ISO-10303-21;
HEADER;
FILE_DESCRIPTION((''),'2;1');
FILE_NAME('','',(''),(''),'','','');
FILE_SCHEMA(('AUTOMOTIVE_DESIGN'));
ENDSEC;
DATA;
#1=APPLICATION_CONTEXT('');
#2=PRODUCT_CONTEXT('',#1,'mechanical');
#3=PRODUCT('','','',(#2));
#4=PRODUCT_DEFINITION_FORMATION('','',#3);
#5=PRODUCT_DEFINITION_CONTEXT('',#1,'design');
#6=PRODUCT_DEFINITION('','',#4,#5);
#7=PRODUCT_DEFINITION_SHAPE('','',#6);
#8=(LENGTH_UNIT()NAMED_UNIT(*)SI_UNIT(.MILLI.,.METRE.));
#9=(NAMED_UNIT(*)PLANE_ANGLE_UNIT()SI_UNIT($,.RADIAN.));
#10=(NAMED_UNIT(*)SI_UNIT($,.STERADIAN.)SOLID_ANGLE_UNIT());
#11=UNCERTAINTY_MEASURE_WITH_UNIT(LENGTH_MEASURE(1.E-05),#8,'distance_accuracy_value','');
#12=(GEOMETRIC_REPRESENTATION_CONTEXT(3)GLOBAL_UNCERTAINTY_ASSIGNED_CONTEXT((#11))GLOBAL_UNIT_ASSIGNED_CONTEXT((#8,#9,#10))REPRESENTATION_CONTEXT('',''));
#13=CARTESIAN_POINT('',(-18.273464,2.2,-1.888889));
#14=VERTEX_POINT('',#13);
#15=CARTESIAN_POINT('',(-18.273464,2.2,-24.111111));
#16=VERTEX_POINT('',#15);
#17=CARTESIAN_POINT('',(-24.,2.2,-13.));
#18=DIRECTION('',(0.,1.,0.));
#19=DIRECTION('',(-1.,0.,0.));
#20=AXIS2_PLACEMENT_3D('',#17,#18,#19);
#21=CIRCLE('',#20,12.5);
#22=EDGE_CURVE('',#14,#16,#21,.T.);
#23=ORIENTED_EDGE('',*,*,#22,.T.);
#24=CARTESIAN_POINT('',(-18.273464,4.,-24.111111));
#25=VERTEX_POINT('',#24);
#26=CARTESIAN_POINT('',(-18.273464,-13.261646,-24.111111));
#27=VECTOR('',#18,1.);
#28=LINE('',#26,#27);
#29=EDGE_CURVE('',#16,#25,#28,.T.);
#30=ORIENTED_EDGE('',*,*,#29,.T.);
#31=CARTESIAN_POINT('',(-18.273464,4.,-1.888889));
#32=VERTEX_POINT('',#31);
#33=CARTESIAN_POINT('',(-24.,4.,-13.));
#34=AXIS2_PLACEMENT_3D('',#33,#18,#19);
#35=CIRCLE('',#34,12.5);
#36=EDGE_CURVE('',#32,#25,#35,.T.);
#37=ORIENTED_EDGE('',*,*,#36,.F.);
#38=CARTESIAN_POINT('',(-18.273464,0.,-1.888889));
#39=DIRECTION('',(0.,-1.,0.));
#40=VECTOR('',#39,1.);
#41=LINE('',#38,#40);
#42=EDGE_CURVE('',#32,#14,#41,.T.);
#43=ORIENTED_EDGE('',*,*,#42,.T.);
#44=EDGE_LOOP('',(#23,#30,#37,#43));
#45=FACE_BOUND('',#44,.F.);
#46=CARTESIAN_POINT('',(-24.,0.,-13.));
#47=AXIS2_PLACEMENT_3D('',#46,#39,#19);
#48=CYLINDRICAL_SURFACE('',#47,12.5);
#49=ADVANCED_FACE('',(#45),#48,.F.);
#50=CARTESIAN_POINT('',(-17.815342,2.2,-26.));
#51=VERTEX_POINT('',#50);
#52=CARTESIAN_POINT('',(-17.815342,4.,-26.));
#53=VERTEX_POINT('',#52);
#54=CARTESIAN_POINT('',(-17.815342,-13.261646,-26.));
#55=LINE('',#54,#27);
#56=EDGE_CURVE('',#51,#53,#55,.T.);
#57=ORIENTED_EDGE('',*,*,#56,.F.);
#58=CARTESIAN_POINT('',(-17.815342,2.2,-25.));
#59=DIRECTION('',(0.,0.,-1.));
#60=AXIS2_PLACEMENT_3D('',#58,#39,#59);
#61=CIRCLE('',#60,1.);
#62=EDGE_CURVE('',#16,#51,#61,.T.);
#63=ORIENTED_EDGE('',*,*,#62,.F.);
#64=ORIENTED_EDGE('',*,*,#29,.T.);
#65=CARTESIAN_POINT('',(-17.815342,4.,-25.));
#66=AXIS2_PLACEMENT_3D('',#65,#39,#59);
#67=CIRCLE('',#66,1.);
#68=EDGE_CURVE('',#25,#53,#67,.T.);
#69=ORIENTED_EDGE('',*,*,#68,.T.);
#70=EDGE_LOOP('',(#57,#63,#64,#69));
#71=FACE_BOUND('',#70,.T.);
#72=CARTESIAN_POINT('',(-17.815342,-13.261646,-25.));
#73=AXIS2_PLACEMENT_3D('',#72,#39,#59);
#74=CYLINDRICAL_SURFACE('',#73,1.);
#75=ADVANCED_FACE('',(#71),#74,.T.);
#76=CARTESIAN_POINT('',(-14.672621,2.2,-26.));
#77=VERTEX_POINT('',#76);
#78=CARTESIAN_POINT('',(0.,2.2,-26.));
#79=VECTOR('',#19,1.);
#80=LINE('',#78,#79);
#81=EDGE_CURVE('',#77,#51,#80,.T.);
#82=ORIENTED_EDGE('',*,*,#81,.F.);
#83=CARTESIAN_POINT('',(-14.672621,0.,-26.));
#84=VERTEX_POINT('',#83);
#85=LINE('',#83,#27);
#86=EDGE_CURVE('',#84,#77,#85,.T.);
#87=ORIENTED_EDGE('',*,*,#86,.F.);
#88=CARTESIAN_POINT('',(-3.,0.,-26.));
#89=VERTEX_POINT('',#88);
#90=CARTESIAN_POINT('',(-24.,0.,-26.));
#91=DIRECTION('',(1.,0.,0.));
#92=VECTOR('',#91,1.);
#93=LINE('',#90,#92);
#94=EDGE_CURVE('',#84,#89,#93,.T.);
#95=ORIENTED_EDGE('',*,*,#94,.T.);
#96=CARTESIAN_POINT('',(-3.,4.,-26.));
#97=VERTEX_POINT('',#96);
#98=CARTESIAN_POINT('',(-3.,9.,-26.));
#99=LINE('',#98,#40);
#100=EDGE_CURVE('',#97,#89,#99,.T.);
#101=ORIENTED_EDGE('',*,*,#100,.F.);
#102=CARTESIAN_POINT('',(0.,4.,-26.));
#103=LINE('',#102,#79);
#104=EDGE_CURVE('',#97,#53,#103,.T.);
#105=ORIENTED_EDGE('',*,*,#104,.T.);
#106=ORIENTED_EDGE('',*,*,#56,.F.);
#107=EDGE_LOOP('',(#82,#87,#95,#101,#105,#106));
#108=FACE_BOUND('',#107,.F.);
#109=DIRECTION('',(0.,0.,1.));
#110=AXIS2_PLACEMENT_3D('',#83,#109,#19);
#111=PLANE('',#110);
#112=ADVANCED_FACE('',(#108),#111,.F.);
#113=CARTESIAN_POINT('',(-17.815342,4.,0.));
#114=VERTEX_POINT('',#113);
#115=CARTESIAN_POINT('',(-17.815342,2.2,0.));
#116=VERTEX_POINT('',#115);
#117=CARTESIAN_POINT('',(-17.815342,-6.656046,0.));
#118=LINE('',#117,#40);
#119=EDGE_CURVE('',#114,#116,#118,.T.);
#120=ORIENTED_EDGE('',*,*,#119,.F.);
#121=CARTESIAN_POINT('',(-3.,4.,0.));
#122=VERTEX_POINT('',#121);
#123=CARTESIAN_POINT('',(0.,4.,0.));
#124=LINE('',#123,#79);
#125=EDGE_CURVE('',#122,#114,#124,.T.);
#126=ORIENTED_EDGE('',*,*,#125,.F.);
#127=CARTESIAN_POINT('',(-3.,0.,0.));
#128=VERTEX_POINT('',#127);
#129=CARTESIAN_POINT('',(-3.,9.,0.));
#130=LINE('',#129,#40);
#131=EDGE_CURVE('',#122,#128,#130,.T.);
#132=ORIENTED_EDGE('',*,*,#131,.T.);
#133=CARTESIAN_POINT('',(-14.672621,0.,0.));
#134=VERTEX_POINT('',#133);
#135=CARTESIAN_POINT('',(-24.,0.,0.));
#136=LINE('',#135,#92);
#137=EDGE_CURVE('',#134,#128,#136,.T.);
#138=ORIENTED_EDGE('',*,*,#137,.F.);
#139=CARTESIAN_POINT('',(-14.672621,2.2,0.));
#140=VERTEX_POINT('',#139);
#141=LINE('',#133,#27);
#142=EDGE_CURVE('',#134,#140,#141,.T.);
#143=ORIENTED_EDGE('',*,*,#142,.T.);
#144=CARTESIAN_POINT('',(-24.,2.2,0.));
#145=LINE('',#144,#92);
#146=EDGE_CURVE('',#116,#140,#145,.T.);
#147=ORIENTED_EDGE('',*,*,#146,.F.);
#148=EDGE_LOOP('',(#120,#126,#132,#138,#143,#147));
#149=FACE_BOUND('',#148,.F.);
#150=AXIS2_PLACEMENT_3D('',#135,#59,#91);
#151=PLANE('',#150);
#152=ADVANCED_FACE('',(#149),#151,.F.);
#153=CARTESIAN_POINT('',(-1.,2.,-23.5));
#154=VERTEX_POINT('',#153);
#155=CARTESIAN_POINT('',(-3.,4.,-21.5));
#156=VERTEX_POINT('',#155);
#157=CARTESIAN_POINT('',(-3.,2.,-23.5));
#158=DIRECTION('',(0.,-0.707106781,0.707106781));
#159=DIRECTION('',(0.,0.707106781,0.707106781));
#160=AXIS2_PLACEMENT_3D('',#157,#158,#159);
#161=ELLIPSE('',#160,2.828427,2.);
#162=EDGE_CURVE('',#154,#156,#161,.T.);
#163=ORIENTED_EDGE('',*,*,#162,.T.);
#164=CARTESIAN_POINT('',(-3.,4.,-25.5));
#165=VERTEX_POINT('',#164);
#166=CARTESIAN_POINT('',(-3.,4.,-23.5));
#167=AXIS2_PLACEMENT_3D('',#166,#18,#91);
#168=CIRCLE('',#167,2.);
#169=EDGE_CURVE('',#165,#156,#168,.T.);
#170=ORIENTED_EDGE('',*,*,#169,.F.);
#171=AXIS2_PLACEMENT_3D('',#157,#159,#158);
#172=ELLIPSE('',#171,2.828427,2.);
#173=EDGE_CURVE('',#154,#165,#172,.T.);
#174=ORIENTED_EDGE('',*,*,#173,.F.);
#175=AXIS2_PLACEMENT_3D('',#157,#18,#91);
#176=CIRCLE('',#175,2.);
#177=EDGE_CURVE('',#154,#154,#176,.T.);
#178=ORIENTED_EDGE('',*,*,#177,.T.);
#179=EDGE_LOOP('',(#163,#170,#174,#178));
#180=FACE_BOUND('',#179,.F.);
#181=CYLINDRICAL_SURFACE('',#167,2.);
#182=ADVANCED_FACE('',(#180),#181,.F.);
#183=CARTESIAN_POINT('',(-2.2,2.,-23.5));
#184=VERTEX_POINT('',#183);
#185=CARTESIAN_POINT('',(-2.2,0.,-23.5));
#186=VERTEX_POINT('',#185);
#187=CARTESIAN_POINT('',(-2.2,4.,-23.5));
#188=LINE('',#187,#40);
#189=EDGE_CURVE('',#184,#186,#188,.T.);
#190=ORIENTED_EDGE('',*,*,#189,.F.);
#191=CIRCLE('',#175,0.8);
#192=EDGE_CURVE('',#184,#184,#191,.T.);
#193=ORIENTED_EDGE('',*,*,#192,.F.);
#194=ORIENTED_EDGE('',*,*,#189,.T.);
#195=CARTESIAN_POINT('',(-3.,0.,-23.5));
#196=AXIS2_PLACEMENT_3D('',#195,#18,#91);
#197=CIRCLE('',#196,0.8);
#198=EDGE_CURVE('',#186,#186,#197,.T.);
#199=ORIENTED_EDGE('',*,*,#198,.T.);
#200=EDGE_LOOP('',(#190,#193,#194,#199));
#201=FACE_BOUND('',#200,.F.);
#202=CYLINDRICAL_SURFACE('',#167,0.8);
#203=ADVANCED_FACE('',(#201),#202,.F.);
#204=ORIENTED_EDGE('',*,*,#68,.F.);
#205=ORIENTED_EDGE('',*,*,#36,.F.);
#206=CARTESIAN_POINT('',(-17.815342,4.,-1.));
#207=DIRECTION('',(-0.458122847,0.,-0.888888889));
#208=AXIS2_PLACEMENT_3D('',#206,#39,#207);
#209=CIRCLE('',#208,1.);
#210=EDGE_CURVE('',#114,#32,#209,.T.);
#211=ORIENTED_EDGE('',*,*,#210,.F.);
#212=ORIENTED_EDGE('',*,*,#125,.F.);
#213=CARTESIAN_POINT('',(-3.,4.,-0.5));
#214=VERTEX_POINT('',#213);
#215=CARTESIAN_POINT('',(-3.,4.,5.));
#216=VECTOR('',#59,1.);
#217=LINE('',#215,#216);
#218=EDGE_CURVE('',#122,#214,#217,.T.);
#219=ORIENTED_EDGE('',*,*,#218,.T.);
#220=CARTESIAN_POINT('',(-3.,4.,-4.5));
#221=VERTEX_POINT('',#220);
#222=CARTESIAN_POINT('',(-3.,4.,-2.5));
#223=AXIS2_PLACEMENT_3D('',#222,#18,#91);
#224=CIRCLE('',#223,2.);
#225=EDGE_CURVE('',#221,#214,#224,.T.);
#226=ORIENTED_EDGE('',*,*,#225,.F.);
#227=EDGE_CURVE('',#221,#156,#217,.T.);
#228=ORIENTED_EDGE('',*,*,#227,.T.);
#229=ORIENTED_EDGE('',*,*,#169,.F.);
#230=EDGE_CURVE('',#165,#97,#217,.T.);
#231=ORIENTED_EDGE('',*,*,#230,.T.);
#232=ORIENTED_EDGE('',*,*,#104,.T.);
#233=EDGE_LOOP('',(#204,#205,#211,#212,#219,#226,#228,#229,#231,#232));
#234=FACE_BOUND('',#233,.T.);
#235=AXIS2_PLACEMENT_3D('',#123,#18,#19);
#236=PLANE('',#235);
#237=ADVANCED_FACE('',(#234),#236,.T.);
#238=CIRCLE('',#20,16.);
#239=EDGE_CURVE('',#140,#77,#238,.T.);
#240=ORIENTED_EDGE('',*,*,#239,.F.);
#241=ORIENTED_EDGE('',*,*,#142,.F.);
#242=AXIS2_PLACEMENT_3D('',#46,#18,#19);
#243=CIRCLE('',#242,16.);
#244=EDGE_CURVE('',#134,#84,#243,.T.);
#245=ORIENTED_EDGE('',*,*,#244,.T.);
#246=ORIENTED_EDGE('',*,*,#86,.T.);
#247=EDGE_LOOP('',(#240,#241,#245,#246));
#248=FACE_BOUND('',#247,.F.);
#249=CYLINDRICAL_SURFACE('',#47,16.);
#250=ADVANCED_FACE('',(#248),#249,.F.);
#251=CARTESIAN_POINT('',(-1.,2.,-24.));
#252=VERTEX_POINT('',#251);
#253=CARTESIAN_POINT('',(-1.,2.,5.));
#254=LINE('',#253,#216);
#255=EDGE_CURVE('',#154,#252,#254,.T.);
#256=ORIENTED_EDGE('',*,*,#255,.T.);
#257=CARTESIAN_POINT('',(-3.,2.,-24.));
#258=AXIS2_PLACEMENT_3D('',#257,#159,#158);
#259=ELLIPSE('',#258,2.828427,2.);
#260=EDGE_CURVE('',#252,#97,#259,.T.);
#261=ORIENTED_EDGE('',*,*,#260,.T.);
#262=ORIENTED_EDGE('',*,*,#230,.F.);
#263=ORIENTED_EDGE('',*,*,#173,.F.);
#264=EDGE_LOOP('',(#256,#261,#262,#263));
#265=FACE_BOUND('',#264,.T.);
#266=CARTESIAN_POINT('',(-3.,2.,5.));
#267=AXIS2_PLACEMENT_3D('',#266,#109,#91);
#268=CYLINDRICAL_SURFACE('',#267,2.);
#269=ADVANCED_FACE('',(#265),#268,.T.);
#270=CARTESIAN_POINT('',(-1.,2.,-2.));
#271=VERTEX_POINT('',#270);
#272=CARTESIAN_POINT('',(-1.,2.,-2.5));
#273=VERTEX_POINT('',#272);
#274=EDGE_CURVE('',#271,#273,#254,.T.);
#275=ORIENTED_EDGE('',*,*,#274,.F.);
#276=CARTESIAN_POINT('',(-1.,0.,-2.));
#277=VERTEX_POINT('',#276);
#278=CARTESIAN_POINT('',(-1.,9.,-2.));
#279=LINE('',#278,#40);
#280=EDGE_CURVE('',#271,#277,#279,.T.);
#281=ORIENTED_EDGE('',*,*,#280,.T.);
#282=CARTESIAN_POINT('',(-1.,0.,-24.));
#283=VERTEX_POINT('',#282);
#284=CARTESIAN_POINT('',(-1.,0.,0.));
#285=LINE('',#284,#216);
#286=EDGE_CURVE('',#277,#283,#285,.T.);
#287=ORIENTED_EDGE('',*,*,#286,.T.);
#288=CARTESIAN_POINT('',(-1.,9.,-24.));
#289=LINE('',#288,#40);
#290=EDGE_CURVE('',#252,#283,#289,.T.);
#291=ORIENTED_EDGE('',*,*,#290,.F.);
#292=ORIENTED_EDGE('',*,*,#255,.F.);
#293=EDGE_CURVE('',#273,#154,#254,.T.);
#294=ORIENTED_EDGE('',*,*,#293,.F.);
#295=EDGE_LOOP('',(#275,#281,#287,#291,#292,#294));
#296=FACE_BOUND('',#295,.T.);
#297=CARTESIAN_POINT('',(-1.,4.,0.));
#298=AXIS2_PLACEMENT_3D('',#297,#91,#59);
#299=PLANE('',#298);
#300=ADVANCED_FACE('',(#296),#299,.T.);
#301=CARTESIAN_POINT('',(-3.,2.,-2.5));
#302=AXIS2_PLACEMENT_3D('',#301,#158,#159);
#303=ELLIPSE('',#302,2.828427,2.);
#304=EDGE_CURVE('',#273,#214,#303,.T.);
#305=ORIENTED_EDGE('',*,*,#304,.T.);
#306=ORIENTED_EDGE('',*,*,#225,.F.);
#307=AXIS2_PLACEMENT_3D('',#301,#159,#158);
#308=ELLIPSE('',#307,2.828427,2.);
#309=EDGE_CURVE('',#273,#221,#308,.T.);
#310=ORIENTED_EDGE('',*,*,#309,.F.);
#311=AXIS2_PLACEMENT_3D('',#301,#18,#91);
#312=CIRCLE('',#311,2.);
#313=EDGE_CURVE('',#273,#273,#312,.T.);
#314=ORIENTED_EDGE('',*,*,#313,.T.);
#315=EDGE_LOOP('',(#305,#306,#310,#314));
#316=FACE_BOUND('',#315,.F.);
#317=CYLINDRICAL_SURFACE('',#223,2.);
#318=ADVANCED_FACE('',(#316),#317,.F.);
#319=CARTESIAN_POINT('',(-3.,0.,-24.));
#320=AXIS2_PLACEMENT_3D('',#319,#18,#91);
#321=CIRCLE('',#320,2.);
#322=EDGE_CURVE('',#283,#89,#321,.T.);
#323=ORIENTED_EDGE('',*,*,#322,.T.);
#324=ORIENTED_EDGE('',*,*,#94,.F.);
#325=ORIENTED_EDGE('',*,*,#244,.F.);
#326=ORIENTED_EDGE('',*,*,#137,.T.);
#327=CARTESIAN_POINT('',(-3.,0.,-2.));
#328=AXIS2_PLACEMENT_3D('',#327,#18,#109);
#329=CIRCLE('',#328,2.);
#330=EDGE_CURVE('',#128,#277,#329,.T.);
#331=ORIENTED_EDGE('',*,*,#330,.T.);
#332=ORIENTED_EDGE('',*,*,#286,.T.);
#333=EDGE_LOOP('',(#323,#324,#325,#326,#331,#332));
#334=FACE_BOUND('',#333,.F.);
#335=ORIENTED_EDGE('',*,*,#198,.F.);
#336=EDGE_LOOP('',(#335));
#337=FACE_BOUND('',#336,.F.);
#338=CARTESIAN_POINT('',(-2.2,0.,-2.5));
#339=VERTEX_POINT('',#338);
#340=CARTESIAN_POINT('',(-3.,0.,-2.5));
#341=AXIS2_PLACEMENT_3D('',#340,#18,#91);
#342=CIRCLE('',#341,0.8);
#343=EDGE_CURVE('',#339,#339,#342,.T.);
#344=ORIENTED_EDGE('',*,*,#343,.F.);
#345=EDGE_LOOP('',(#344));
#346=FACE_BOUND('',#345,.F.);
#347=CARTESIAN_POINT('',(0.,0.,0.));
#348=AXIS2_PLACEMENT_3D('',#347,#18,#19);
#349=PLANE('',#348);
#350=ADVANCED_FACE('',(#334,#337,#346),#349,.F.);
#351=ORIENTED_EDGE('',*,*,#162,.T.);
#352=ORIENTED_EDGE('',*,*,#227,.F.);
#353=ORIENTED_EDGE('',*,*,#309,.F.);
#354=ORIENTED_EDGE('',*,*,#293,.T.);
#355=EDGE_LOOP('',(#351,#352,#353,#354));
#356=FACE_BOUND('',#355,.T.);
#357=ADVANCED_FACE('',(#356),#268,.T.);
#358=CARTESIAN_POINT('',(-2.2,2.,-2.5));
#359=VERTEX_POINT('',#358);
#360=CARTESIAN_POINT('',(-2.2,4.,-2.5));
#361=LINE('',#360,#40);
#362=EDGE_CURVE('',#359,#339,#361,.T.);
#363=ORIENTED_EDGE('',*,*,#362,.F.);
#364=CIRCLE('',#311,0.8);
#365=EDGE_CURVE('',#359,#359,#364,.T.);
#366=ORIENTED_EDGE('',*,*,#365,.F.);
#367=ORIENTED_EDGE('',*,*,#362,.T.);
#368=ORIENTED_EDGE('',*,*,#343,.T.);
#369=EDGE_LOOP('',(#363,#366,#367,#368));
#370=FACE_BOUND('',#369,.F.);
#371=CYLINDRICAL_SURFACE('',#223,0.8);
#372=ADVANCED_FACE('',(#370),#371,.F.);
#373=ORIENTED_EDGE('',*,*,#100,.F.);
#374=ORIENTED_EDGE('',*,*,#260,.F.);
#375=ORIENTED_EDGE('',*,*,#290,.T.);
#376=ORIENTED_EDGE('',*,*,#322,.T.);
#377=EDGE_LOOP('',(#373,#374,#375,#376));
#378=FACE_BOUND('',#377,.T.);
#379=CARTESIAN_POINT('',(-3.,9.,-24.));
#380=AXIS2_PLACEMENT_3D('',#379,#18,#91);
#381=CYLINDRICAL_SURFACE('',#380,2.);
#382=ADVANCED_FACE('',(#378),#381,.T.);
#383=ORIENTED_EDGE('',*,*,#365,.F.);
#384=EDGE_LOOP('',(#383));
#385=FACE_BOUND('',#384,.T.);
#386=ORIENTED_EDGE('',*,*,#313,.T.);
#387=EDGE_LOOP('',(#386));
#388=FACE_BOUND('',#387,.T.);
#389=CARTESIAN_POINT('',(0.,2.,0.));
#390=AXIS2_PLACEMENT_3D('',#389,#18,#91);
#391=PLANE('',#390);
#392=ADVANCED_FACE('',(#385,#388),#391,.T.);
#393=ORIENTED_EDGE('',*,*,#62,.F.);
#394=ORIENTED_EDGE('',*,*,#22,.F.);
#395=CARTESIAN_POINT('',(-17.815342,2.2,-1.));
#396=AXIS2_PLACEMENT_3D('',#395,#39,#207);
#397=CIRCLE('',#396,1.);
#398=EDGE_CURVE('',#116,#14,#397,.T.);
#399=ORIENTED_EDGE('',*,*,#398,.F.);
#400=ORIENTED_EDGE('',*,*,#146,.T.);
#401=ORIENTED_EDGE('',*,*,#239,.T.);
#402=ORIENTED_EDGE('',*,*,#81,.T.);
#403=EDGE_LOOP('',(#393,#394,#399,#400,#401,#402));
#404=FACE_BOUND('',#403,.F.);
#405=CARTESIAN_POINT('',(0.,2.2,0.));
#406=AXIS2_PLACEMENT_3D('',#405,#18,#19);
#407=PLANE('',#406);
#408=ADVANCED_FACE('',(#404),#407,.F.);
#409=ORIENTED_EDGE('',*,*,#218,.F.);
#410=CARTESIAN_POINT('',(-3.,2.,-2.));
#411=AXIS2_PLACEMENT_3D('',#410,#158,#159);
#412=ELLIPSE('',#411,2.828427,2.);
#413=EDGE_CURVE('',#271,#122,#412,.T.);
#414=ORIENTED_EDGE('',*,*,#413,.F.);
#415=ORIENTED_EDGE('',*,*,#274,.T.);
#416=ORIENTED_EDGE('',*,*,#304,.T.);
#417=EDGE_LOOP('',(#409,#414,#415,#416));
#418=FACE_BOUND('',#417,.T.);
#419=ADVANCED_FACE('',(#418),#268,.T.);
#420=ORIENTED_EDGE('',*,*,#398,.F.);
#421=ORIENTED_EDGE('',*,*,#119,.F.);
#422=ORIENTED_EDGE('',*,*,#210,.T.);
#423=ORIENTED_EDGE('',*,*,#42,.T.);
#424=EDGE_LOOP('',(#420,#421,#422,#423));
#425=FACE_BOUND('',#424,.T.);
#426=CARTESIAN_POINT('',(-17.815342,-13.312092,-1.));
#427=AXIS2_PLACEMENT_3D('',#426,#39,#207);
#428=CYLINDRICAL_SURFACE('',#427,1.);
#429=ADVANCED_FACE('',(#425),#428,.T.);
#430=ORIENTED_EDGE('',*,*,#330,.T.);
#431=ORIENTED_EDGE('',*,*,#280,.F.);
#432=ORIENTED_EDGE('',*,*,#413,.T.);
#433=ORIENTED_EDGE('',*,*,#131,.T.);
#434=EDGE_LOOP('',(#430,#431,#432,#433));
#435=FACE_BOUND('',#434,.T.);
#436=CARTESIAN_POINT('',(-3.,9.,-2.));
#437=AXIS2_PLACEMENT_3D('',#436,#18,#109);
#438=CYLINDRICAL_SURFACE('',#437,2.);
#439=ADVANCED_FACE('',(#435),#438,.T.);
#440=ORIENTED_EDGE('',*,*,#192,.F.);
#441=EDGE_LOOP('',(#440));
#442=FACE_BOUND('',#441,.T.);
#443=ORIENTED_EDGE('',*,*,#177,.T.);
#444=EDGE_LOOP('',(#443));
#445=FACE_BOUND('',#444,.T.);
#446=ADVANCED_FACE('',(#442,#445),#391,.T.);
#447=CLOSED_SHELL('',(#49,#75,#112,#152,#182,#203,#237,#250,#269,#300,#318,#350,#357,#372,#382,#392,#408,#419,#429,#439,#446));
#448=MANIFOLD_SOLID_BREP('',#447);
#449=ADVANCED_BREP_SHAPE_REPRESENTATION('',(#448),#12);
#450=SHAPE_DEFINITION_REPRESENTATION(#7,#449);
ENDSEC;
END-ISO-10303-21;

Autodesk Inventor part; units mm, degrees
ref_plane "YZ Plane" through (0, 0, 0) normal (1, 0, 0) x (0, 1, 0)
ref_plane "XZ Plane" through (0, 0, 0) normal (0, 1, 0) x (-1, 0, 0)
ref_plane "XY Plane" through (0, 0, 0) normal (0, 0, 1) x (1, 0, 0)
sketch "スケッチ1" plane through (0, 0, 0) normal (0, 1, 0) x (-1, 0, 0)
  line L0 (24, 0) -> (0, 0)
  line L1 (0, 0) -> (0, -26)
  line L2 (0, -26) -> (24, -26)
  line L3 (24, -26) -> (24, 0)
  circle A0 centre (24, -13) radius 13 construction
  circle A1 centre (24, -13) radius 12.5
  circle A2 centre (24, -13) radius 16
  point P0 (24, -25.5)
  point P1 (24, -0.5)
  point P2 (14.6726, 0)
  point P3 (14.6726, -26)
  dimension "d0" = 26
  dimension "d1" = 24
  dimension "d2" = 25
  dimension "d3" = 32
extrude "押し出し1" add sketch "スケッチ1" along normal blind 4 contours L3 A1 L2 A2 L0 | A2 L2 L1 L0 picked at (14.0879, -23.9339)
extrude "押し出し2" cut sketch "スケッチ1" along normal blind 2.2 contours L3 A1 L2 A2 L0 picked at (14.0879, -23.9339)
fillet "フィレット1" radius 1 4 edges at (-24, 3.1, -0.5) (-24, 3.1, 0) (-24, 3.1, -26) (-24, 3.1, -25.5)
sketch "スケッチ2" plane through (0, 4, 0) normal (0, 1, 0) x (1, 0, 0)
  circle A0 centre (-3, 2.5) radius 0.85 construction
  circle A1 centre (-3, 23.5) radius 0.85 construction
  circle A2 centre (-3, 2.5) radius 0.8
  circle A3 centre (-3, 23.5) radius 0.8
  point P0 (0, 0)
  dimension "d9" = 1.6
  dimension "d10" = 1.6
extrude "押し出し3" cut sketch "スケッチ2" against normal through all
sketch "スケッチ4" plane through (0, 4, 0) normal (0, 1, 0) x (1, 0, 0)
  line L0 (0, 26) -> (-17.8153, 26) projected
  line L1 (0, 0) -> (-1, 0)
  line L2 (-1, 0) -> (-1, 26)
  line L3 (-1, 26) -> (0, 26)
  line L4 (0, 26) -> (0, 0)
  dimension "d20" = 1
extrude "押し出し5" cut sketch "スケッチ4" against normal through all
sketch "スケッチ3" plane through (0, 4, 0) normal (0, 1, 0) x (1, 0, 0)
  circle A0 centre (-3, 2.5) radius 0.8 projected
  circle A1 centre (-3, 23.5) radius 0.8 projected
  circle A2 centre (-3, 2.5) radius 2
  circle A3 centre (-3, 23.5) radius 2
  point P0 (0, 0)
  dimension "d13" = 4
  dimension "d14" = 4
fillet "フィレット3" radius 2 3 edges at (-1, 4, -13) (-1, 2, 0) (-1, 2, -26)
extrude "押し出し6" cut sketch "スケッチ3" against normal blind 2
properties part number "joit_cover"
